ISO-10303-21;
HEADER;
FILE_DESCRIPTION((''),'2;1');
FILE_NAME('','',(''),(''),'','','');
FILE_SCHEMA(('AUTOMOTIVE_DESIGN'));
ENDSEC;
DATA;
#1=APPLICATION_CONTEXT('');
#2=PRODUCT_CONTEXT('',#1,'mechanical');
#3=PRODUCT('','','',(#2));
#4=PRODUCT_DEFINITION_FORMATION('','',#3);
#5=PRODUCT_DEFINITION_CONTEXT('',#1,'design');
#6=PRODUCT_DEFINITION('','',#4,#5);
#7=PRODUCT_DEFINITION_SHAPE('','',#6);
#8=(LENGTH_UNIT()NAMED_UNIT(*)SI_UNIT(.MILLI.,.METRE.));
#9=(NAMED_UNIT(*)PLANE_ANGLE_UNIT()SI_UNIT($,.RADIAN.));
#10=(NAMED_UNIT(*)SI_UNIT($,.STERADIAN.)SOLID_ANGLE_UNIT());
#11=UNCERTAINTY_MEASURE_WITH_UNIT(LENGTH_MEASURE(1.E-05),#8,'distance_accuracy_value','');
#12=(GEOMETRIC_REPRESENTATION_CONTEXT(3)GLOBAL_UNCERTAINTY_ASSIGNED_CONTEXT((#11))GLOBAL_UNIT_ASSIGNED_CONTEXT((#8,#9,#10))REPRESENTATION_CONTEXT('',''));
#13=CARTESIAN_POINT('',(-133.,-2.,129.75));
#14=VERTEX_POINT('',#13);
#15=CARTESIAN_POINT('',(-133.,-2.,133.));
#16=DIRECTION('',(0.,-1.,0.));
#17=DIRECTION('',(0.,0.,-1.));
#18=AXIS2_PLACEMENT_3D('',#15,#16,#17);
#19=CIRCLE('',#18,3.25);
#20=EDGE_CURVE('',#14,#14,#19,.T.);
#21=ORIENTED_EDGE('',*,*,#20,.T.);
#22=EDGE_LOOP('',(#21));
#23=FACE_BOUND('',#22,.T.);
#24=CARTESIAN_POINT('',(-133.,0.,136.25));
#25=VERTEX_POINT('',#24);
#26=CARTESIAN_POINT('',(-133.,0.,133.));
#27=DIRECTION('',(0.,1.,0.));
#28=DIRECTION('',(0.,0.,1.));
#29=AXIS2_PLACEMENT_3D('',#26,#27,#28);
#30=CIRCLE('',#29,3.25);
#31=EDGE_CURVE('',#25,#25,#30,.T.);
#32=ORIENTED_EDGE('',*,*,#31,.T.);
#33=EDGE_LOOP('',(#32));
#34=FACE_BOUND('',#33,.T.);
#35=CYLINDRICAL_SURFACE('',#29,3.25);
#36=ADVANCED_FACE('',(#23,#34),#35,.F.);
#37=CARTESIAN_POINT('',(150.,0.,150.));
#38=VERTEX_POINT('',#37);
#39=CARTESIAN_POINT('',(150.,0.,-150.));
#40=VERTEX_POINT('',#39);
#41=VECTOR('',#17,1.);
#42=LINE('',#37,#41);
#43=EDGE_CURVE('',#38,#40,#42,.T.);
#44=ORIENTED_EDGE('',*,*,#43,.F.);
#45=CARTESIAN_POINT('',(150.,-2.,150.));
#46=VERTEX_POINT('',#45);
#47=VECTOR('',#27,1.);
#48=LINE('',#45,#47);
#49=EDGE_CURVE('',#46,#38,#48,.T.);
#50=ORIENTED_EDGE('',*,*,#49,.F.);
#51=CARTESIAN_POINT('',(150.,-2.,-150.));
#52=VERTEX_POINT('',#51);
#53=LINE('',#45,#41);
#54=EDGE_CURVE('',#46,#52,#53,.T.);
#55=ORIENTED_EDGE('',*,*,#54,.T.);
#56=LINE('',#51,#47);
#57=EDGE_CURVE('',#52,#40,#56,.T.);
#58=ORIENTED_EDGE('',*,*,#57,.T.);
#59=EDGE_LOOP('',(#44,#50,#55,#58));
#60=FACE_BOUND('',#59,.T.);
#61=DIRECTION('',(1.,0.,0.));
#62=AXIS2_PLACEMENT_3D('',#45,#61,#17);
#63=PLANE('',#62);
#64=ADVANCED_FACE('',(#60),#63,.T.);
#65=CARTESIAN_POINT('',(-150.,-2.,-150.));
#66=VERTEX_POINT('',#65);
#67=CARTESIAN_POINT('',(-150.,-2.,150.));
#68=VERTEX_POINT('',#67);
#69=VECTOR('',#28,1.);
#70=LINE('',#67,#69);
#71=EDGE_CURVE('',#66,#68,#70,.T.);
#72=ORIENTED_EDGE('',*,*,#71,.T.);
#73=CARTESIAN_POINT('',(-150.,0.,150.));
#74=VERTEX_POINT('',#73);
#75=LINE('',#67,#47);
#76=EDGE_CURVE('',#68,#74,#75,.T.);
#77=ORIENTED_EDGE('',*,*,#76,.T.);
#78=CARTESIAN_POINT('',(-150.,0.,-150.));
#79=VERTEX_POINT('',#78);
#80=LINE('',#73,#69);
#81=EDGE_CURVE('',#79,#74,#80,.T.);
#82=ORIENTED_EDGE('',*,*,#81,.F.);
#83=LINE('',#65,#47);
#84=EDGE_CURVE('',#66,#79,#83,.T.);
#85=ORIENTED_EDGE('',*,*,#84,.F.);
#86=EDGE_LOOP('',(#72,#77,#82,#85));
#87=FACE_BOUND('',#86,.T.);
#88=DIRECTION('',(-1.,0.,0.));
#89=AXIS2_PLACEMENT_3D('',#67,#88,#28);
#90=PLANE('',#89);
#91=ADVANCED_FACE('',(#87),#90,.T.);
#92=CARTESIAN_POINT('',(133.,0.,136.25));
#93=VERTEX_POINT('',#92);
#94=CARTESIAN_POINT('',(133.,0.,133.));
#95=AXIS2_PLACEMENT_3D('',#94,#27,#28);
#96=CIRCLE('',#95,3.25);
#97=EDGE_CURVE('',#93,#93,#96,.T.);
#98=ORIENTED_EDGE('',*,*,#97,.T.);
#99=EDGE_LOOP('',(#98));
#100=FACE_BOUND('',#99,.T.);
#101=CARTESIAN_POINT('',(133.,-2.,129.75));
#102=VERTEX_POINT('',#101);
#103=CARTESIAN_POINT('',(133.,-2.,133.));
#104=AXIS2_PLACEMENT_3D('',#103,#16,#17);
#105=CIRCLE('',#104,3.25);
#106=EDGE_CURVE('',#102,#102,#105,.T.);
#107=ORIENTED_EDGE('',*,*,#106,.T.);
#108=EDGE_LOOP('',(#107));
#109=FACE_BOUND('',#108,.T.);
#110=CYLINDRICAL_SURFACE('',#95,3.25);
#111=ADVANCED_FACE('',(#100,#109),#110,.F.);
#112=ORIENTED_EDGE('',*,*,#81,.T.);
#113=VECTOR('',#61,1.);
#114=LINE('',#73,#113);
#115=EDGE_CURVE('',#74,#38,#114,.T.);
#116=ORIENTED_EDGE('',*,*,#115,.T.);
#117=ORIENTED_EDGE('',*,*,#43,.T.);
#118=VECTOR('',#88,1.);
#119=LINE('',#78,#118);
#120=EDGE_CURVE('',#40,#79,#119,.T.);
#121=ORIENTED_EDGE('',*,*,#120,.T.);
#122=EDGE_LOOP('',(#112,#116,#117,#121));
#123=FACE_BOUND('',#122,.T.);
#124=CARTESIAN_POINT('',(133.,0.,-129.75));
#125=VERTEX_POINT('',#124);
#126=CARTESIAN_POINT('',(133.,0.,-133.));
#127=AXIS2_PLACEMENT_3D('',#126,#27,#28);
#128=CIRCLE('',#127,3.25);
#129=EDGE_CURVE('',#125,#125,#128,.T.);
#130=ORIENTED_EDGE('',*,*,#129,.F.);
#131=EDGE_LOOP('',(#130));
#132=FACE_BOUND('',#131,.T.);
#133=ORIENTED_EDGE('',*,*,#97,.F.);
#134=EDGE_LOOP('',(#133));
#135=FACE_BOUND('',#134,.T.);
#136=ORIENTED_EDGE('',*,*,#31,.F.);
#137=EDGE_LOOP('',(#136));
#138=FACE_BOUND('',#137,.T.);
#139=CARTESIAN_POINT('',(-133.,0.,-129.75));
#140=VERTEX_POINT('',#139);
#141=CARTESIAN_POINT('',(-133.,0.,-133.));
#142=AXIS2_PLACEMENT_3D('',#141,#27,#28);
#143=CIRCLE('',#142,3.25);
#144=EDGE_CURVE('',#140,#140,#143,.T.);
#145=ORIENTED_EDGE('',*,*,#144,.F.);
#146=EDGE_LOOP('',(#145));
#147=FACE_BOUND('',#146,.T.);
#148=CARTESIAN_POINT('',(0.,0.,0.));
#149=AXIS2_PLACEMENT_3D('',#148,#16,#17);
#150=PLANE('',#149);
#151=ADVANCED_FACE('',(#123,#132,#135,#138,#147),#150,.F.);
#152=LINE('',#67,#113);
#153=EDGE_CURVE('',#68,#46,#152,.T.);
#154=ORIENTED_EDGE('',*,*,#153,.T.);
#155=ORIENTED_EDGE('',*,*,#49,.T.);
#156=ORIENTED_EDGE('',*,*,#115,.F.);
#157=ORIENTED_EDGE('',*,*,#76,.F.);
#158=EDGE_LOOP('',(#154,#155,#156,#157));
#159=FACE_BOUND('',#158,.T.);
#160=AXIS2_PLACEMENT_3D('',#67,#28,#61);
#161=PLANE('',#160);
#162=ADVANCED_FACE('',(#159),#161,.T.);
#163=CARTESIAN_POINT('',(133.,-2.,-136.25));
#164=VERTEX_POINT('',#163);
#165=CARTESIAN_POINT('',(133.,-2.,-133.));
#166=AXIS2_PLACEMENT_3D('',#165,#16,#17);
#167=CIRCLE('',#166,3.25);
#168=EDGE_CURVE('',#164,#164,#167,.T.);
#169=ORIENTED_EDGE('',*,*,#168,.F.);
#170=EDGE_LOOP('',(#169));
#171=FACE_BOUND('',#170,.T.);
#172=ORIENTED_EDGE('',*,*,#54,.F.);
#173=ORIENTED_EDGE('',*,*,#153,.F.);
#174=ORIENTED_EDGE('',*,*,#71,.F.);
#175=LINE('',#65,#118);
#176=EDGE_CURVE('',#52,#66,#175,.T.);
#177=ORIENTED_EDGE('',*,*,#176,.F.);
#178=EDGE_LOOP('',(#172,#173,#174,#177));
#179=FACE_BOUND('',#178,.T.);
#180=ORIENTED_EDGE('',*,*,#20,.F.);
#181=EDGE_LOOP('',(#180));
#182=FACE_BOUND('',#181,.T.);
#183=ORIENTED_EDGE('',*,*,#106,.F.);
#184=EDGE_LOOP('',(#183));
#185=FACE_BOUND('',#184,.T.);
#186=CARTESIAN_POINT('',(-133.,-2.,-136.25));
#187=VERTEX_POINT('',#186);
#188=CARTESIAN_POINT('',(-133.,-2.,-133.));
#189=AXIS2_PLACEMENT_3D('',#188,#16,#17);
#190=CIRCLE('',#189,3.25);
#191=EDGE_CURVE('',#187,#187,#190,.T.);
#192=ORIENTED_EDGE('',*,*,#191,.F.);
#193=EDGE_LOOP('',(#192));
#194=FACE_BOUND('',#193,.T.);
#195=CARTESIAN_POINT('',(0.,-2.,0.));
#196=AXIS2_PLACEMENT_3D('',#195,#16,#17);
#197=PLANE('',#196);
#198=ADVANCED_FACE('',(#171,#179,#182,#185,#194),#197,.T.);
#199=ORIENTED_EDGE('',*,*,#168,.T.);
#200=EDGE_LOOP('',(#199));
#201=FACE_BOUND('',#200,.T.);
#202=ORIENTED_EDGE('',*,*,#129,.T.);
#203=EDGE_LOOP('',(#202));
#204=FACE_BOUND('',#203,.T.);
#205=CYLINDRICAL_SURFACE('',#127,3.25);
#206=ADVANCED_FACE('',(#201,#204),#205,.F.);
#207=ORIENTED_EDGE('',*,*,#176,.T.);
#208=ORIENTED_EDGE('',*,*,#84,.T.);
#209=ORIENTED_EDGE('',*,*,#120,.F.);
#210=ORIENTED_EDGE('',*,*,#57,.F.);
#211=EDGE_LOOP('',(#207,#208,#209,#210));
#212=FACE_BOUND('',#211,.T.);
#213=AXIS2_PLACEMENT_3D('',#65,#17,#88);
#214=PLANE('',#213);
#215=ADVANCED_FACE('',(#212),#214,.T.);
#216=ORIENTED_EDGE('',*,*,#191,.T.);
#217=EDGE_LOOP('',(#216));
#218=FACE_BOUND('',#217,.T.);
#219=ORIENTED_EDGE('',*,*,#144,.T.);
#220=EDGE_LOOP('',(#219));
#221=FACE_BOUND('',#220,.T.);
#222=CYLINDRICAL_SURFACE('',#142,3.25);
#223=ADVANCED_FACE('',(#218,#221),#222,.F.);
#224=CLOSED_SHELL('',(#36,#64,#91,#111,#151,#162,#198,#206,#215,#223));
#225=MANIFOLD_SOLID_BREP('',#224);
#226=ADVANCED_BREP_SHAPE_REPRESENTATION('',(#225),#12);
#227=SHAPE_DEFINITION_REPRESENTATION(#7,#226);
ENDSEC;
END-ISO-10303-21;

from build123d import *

# Parameters (mm, degrees)
SKETCH1_W                  = 300
SKETCH1_H                  = 300
BASE_FLANGE1_DEPTH         = 2
F_6_5_6_5_DIAMETER_HOLE1_D = 6.5


# Sheet-metal steps are written as plain solids
with BuildPart() as part:
    # Sketch1 → Base-Flange1 (new body)
    with BuildSketch(Plane(origin=(0, 0, 0), x_dir=(1, 0, 0), z_dir=(0, 1, 0))):
        Rectangle(SKETCH1_W, SKETCH1_H)
    extrude(amount=-BASE_FLANGE1_DEPTH)

    # Ø6.5 (6.5) Diameter Hole1 (through all)
    with Locations(Plane(origin=(0, 0, 0), x_dir=(1, 0, 0), z_dir=(0, 1, 0))):
        with Locations((-133, 133), (133, 133), (133, -133), (-133, -133)):
            Hole(F_6_5_6_5_DIAMETER_HOLE1_D / 2)


solid = part.part
